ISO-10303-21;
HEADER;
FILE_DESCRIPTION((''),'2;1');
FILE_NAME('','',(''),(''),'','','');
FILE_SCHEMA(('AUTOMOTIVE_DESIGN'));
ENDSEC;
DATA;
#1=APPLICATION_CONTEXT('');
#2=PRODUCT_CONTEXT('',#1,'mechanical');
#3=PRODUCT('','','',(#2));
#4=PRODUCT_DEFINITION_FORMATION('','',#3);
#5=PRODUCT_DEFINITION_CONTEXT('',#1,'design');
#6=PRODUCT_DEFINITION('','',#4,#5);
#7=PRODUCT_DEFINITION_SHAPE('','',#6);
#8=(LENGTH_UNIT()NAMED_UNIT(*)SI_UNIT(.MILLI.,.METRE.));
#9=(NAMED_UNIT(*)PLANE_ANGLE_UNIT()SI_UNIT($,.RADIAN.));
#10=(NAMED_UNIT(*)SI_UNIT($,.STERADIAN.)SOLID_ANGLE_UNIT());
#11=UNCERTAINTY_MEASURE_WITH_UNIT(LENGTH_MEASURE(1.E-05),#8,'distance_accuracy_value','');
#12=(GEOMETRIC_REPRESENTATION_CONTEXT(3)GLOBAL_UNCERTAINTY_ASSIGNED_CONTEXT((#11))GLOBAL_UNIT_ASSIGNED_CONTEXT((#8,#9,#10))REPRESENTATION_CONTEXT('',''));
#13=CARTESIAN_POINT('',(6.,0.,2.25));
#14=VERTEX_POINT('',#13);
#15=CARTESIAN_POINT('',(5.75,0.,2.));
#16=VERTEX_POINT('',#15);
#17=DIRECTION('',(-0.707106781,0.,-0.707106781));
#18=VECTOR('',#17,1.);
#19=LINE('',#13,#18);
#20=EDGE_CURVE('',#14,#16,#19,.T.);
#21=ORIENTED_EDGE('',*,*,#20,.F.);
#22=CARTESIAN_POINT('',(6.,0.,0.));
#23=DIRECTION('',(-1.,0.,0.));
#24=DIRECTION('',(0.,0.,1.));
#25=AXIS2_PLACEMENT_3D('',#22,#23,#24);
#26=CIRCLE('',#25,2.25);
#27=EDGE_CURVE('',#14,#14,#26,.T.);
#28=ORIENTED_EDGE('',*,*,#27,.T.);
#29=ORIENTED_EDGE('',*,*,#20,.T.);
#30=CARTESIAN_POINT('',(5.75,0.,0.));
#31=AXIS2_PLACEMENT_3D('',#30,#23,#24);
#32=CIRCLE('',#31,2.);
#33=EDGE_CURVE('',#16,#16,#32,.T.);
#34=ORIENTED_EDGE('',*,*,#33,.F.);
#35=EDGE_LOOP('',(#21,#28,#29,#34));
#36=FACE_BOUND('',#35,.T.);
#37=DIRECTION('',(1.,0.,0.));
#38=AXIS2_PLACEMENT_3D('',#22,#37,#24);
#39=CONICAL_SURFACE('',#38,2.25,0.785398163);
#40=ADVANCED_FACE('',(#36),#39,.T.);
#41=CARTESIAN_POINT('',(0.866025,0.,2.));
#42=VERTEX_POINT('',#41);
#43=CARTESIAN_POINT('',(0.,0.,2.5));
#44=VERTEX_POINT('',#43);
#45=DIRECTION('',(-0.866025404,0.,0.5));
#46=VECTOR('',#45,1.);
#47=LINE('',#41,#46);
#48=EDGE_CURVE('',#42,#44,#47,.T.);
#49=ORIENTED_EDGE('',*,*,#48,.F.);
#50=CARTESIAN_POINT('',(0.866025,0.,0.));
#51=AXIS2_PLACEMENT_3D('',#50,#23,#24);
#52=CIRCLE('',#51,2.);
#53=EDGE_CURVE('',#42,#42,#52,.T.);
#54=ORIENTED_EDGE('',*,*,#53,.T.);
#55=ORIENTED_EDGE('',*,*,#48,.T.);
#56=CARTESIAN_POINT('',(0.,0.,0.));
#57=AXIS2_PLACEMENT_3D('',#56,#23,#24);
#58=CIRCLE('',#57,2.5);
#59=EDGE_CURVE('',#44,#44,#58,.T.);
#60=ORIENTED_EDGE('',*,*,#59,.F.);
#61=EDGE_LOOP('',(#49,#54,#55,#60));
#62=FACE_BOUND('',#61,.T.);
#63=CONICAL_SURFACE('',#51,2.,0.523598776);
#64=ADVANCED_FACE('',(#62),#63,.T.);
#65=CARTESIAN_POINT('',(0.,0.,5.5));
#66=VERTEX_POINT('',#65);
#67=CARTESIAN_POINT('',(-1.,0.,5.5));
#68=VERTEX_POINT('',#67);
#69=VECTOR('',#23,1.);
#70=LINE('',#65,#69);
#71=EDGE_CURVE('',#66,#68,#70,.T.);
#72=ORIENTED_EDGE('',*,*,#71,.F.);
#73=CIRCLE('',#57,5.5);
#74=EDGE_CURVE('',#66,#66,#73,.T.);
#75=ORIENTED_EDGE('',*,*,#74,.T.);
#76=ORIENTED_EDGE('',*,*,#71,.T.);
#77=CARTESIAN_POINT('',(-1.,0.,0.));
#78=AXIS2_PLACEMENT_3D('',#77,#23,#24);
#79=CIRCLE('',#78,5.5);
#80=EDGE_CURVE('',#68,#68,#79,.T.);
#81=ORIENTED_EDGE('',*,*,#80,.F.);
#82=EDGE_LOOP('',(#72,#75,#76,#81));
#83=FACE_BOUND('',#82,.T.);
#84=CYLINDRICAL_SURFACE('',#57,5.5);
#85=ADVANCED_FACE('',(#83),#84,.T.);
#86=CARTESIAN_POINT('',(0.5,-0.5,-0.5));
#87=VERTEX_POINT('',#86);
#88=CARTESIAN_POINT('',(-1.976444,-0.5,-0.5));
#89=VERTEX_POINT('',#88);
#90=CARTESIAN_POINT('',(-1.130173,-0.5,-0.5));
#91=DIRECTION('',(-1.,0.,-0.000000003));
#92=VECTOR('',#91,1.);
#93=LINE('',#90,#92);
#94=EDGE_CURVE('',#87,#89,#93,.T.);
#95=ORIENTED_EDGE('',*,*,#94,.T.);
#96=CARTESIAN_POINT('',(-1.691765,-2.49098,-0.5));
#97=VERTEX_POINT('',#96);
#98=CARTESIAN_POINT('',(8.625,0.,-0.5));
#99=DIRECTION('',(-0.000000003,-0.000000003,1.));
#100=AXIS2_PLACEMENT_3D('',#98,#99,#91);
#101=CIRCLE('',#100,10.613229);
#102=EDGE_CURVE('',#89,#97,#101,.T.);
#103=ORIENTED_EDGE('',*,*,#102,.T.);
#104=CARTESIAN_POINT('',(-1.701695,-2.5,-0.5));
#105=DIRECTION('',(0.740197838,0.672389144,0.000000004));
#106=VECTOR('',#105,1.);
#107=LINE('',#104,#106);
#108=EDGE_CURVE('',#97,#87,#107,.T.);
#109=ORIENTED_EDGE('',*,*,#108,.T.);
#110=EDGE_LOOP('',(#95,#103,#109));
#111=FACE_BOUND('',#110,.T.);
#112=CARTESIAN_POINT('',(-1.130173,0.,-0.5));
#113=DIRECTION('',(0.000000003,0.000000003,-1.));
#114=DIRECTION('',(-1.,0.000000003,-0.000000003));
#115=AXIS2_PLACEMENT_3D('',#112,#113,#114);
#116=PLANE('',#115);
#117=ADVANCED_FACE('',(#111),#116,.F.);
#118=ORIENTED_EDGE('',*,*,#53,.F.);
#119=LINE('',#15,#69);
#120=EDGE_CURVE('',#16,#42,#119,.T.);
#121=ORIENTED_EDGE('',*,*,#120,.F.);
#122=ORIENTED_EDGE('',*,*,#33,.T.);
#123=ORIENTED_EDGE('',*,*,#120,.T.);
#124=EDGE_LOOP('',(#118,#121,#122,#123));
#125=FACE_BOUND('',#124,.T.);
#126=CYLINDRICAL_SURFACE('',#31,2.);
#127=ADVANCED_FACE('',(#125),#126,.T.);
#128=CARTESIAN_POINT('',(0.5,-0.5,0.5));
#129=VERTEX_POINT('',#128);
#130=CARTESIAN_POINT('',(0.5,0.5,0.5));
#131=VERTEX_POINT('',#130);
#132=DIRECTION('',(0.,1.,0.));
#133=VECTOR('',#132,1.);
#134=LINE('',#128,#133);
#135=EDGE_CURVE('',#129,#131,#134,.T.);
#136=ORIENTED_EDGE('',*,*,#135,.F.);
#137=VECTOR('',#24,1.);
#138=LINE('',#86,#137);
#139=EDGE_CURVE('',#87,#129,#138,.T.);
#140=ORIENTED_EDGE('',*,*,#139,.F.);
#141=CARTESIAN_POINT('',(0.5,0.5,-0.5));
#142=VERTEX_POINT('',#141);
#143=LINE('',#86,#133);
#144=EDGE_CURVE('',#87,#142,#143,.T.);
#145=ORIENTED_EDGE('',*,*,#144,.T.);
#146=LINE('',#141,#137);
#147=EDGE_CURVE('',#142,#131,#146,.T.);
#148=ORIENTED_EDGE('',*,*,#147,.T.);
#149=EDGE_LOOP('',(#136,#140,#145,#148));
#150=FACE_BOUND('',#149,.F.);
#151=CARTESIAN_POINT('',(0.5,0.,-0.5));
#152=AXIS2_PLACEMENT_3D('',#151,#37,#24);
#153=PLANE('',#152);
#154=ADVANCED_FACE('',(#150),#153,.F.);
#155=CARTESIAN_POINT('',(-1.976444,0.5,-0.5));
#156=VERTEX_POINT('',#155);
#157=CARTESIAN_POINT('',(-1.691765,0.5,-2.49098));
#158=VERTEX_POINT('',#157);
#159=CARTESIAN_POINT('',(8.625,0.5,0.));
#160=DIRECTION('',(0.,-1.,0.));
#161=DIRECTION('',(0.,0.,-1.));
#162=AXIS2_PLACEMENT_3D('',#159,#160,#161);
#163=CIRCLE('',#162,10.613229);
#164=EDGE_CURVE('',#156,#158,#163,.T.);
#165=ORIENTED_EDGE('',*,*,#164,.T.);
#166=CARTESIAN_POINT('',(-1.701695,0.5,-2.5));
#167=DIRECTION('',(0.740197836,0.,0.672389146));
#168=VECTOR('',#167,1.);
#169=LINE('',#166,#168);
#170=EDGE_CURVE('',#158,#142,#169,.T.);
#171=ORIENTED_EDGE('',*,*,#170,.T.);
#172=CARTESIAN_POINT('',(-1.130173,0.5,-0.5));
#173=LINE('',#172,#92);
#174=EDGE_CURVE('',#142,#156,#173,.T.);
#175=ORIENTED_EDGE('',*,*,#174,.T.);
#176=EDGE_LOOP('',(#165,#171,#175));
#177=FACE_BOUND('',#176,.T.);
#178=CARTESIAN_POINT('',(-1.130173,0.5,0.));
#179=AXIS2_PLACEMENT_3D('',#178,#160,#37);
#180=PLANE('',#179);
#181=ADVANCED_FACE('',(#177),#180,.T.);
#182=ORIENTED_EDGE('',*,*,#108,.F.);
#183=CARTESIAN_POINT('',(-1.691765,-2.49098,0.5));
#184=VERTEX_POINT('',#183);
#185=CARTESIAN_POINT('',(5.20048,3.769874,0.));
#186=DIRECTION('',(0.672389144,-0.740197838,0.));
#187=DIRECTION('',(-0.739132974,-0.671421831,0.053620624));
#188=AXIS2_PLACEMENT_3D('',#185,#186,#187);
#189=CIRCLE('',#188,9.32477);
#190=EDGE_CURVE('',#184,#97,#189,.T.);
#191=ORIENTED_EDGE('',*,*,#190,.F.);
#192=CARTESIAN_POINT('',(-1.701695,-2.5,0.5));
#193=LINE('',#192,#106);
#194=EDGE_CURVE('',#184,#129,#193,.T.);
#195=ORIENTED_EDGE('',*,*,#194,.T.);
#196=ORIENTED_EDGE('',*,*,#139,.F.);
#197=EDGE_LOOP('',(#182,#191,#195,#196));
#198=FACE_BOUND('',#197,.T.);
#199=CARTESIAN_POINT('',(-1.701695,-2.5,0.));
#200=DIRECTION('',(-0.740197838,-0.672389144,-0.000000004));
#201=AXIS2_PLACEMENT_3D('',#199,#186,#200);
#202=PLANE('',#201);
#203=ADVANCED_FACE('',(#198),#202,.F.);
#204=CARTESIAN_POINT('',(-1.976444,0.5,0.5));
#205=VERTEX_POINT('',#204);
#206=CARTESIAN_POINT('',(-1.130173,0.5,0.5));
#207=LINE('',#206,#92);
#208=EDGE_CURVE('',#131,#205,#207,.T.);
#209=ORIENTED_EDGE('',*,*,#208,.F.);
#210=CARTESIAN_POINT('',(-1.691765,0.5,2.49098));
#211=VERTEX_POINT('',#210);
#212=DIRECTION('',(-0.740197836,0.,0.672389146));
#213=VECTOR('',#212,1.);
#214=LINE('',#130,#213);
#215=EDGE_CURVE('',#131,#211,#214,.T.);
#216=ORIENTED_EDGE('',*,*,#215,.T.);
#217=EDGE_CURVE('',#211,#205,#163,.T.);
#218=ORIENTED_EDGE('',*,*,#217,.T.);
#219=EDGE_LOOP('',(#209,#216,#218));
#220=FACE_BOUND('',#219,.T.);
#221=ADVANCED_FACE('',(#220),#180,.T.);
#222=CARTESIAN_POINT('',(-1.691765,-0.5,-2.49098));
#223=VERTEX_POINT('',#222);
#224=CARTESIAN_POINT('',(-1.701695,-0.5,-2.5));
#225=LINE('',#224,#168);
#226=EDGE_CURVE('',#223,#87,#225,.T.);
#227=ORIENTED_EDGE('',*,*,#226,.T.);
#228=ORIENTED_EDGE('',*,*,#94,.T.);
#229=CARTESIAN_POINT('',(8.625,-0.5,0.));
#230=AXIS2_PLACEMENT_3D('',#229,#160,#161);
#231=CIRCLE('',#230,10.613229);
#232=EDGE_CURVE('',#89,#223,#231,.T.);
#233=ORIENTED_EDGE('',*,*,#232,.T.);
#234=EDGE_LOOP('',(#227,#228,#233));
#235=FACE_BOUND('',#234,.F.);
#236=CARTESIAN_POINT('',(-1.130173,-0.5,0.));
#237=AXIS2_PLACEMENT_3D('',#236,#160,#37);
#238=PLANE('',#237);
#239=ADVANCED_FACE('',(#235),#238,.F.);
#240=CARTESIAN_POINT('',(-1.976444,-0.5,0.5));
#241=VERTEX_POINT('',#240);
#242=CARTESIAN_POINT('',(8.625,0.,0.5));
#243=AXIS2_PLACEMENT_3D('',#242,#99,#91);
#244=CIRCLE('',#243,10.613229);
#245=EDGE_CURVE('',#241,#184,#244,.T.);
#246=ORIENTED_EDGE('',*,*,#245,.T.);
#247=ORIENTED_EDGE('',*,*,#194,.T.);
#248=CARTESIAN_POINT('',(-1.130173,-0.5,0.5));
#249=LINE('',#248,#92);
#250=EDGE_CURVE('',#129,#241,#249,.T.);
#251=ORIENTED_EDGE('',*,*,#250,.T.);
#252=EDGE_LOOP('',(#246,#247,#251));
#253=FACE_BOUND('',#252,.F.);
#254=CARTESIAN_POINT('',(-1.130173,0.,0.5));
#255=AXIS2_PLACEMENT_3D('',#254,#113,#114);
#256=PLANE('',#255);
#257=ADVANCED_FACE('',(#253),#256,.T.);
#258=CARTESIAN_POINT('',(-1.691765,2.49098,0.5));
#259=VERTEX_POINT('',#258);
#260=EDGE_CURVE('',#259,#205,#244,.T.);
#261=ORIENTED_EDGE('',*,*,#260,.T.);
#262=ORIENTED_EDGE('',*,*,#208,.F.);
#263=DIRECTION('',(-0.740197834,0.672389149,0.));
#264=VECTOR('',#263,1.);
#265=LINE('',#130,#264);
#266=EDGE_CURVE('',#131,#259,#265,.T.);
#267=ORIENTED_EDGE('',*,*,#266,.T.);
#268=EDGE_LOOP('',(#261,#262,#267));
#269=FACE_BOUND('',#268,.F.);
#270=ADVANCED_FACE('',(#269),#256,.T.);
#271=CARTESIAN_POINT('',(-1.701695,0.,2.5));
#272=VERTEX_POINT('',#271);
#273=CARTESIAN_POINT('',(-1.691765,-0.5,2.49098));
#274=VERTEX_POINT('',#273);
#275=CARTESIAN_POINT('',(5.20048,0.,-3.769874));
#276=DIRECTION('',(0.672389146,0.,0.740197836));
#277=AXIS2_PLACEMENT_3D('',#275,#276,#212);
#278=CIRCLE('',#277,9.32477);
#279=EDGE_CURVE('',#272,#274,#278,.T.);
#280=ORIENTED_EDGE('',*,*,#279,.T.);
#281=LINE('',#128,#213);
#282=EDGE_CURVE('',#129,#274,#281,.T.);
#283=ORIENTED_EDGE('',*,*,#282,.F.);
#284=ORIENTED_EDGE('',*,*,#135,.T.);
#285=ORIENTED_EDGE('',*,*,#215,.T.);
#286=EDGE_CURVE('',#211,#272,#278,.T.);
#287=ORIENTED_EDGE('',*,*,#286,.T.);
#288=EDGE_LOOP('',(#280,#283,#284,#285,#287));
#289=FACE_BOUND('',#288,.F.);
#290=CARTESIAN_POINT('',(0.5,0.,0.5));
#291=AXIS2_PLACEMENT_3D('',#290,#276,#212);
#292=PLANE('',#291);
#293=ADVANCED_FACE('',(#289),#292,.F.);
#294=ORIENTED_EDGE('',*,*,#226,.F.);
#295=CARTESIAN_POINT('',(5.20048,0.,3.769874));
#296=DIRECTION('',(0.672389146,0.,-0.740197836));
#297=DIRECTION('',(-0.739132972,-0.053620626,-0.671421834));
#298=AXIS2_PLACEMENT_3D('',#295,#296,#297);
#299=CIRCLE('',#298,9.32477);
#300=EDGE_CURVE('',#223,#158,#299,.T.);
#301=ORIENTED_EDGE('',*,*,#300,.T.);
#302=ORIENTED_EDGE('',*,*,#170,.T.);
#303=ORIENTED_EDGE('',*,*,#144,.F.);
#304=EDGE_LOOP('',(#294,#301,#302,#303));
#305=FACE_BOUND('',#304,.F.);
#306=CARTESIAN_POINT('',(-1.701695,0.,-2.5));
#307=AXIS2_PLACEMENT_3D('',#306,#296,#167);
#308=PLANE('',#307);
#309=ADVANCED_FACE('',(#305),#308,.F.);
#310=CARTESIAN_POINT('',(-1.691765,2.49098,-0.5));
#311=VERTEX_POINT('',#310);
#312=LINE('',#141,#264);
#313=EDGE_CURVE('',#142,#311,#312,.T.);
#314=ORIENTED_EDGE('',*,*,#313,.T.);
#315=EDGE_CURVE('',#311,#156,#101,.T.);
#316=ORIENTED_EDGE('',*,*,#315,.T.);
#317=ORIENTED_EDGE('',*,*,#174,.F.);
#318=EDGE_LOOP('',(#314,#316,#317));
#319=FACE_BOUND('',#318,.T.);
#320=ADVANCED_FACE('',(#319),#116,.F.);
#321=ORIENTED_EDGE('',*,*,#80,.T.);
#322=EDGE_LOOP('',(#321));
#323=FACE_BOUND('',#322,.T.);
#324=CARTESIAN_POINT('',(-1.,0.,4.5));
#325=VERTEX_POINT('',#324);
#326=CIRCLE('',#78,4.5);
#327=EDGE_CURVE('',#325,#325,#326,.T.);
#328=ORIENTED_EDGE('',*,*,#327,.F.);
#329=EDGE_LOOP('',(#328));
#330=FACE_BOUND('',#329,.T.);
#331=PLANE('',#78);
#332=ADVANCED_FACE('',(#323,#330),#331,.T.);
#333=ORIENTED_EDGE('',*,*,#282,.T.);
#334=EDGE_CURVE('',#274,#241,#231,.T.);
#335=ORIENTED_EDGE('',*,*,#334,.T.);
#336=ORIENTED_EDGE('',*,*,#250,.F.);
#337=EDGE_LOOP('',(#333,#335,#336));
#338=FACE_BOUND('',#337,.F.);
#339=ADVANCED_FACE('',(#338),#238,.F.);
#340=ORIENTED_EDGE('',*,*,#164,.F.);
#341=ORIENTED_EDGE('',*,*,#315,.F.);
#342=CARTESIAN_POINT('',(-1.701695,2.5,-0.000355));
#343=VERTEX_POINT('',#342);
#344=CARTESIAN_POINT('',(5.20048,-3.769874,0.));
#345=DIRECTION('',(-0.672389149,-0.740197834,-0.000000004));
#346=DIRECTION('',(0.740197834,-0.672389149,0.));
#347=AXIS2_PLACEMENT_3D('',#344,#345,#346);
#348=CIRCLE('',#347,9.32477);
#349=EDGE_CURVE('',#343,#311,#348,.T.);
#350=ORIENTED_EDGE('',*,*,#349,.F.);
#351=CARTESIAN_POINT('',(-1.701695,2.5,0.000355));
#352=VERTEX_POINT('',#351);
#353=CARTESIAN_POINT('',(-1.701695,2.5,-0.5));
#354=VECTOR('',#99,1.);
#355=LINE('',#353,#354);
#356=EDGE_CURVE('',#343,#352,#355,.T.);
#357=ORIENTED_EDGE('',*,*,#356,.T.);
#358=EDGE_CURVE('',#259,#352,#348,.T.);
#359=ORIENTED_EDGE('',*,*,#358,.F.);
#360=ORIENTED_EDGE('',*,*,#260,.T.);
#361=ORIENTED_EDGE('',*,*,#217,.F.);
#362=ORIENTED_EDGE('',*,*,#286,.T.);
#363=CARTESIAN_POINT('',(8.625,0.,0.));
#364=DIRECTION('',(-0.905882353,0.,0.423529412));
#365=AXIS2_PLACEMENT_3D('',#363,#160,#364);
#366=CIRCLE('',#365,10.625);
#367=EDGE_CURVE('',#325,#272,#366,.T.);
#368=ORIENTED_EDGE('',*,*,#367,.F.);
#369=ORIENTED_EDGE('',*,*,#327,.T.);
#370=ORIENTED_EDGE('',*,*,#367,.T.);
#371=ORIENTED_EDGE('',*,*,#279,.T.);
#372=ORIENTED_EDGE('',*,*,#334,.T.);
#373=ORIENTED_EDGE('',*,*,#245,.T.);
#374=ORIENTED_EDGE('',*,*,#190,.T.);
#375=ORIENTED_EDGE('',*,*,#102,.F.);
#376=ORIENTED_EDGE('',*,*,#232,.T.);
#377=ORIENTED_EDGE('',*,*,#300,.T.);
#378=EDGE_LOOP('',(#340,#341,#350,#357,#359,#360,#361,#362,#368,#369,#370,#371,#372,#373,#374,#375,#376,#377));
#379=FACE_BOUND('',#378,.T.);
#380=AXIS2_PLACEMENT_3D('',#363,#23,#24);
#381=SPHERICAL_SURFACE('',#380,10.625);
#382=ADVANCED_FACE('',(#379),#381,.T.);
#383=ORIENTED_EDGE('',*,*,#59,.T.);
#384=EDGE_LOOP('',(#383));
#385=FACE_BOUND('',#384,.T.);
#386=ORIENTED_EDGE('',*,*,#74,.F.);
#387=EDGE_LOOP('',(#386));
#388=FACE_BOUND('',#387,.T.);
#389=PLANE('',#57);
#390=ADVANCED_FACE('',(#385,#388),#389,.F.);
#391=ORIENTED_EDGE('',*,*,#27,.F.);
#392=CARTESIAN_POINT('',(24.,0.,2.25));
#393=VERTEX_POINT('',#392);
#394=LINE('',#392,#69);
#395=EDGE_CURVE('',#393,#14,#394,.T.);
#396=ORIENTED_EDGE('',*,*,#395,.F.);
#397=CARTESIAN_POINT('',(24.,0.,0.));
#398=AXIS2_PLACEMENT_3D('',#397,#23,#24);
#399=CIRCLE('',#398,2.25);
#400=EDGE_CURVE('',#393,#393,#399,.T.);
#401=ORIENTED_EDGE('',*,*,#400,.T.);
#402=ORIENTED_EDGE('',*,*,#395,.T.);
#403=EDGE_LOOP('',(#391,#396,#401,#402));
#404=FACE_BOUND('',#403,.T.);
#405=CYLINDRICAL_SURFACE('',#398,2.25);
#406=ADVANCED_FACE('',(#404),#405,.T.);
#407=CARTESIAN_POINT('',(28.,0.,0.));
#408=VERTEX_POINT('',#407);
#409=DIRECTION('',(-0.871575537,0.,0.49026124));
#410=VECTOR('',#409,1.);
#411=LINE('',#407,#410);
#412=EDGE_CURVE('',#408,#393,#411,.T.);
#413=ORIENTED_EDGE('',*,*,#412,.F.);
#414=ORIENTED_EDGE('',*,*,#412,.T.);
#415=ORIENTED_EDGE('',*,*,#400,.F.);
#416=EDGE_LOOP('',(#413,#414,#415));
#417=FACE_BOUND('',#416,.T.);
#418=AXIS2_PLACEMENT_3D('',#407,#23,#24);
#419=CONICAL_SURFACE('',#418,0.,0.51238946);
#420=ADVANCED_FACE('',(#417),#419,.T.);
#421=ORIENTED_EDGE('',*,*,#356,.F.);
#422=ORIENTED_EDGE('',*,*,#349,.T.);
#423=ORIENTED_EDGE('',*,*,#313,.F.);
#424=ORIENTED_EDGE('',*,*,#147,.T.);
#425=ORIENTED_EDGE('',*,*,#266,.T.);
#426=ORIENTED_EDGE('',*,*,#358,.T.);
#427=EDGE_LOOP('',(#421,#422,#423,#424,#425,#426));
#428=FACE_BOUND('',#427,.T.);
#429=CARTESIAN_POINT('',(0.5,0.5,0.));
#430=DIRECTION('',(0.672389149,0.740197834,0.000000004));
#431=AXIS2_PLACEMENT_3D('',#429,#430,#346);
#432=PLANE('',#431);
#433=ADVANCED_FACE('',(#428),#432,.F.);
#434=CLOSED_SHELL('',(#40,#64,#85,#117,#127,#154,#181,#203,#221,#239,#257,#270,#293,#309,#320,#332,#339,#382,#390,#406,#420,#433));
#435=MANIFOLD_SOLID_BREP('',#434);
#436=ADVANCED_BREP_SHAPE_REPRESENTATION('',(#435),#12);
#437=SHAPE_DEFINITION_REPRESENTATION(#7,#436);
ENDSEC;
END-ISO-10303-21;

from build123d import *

# Parameters (mm, degrees)
F3_DEPTH = 0.5


# Not quite as in the source:
# - a pattern or mirror of a feature is missing from the dataset's text; its kind, count and spacing are read off the source's solid


with BuildPart() as f1:
    # F0 (on Front) → F1 (revolve)
    with BuildSketch(Plane.XZ):
        with BuildLine():
            Line((28, 0), (24, 2.25))
            Line((24, 2.25), (6, 2.25))
            Line((6, 2.25), (5.75, 2))
            Line((5.75, 2), (0.8660254038, 2))
            Line((0.8660254038, 2), (0, 2.5))
            Line((0, 2.5), (0, 5.5))
            Line((0, 5.5), (-1, 5.5))
            Line((-1, 5.5), (-1, 4.5))
            ThreePointArc((-1, 4.5), (-1.7469875145, 2.3048861143), (-2, 0))
            Line((-2, 0), (28, 0))
        make_face()
    revolve(axis=Axis((13, 0, 0), (-1, 0, 0)))

    # F2 (on Front) → F3 (cut, symmetric)
    with BuildSketch(Plane.XZ):
        Polygon((-1.7016947762, 2.5), (-2, 2.5), (-2, 0), (-2, -2.5), (-1.7016947762, -2.5), (0.5, -0.5), (0.5, 0), (0.5, 0.5), align=None)
    f3 = extrude(amount=F3_DEPTH, both=True, mode=Mode.SUBTRACT)

    # F3_copies: F3 across plane
    add(f3.mirror(Plane(origin=(0, 0, 0), x_dir=(0, -0.7071067802, -0.7071067821), z_dir=(-2.1e-09, -0.7071067821, 0.7071067802))), mode=Mode.SUBTRACT)


solid = f1.part
